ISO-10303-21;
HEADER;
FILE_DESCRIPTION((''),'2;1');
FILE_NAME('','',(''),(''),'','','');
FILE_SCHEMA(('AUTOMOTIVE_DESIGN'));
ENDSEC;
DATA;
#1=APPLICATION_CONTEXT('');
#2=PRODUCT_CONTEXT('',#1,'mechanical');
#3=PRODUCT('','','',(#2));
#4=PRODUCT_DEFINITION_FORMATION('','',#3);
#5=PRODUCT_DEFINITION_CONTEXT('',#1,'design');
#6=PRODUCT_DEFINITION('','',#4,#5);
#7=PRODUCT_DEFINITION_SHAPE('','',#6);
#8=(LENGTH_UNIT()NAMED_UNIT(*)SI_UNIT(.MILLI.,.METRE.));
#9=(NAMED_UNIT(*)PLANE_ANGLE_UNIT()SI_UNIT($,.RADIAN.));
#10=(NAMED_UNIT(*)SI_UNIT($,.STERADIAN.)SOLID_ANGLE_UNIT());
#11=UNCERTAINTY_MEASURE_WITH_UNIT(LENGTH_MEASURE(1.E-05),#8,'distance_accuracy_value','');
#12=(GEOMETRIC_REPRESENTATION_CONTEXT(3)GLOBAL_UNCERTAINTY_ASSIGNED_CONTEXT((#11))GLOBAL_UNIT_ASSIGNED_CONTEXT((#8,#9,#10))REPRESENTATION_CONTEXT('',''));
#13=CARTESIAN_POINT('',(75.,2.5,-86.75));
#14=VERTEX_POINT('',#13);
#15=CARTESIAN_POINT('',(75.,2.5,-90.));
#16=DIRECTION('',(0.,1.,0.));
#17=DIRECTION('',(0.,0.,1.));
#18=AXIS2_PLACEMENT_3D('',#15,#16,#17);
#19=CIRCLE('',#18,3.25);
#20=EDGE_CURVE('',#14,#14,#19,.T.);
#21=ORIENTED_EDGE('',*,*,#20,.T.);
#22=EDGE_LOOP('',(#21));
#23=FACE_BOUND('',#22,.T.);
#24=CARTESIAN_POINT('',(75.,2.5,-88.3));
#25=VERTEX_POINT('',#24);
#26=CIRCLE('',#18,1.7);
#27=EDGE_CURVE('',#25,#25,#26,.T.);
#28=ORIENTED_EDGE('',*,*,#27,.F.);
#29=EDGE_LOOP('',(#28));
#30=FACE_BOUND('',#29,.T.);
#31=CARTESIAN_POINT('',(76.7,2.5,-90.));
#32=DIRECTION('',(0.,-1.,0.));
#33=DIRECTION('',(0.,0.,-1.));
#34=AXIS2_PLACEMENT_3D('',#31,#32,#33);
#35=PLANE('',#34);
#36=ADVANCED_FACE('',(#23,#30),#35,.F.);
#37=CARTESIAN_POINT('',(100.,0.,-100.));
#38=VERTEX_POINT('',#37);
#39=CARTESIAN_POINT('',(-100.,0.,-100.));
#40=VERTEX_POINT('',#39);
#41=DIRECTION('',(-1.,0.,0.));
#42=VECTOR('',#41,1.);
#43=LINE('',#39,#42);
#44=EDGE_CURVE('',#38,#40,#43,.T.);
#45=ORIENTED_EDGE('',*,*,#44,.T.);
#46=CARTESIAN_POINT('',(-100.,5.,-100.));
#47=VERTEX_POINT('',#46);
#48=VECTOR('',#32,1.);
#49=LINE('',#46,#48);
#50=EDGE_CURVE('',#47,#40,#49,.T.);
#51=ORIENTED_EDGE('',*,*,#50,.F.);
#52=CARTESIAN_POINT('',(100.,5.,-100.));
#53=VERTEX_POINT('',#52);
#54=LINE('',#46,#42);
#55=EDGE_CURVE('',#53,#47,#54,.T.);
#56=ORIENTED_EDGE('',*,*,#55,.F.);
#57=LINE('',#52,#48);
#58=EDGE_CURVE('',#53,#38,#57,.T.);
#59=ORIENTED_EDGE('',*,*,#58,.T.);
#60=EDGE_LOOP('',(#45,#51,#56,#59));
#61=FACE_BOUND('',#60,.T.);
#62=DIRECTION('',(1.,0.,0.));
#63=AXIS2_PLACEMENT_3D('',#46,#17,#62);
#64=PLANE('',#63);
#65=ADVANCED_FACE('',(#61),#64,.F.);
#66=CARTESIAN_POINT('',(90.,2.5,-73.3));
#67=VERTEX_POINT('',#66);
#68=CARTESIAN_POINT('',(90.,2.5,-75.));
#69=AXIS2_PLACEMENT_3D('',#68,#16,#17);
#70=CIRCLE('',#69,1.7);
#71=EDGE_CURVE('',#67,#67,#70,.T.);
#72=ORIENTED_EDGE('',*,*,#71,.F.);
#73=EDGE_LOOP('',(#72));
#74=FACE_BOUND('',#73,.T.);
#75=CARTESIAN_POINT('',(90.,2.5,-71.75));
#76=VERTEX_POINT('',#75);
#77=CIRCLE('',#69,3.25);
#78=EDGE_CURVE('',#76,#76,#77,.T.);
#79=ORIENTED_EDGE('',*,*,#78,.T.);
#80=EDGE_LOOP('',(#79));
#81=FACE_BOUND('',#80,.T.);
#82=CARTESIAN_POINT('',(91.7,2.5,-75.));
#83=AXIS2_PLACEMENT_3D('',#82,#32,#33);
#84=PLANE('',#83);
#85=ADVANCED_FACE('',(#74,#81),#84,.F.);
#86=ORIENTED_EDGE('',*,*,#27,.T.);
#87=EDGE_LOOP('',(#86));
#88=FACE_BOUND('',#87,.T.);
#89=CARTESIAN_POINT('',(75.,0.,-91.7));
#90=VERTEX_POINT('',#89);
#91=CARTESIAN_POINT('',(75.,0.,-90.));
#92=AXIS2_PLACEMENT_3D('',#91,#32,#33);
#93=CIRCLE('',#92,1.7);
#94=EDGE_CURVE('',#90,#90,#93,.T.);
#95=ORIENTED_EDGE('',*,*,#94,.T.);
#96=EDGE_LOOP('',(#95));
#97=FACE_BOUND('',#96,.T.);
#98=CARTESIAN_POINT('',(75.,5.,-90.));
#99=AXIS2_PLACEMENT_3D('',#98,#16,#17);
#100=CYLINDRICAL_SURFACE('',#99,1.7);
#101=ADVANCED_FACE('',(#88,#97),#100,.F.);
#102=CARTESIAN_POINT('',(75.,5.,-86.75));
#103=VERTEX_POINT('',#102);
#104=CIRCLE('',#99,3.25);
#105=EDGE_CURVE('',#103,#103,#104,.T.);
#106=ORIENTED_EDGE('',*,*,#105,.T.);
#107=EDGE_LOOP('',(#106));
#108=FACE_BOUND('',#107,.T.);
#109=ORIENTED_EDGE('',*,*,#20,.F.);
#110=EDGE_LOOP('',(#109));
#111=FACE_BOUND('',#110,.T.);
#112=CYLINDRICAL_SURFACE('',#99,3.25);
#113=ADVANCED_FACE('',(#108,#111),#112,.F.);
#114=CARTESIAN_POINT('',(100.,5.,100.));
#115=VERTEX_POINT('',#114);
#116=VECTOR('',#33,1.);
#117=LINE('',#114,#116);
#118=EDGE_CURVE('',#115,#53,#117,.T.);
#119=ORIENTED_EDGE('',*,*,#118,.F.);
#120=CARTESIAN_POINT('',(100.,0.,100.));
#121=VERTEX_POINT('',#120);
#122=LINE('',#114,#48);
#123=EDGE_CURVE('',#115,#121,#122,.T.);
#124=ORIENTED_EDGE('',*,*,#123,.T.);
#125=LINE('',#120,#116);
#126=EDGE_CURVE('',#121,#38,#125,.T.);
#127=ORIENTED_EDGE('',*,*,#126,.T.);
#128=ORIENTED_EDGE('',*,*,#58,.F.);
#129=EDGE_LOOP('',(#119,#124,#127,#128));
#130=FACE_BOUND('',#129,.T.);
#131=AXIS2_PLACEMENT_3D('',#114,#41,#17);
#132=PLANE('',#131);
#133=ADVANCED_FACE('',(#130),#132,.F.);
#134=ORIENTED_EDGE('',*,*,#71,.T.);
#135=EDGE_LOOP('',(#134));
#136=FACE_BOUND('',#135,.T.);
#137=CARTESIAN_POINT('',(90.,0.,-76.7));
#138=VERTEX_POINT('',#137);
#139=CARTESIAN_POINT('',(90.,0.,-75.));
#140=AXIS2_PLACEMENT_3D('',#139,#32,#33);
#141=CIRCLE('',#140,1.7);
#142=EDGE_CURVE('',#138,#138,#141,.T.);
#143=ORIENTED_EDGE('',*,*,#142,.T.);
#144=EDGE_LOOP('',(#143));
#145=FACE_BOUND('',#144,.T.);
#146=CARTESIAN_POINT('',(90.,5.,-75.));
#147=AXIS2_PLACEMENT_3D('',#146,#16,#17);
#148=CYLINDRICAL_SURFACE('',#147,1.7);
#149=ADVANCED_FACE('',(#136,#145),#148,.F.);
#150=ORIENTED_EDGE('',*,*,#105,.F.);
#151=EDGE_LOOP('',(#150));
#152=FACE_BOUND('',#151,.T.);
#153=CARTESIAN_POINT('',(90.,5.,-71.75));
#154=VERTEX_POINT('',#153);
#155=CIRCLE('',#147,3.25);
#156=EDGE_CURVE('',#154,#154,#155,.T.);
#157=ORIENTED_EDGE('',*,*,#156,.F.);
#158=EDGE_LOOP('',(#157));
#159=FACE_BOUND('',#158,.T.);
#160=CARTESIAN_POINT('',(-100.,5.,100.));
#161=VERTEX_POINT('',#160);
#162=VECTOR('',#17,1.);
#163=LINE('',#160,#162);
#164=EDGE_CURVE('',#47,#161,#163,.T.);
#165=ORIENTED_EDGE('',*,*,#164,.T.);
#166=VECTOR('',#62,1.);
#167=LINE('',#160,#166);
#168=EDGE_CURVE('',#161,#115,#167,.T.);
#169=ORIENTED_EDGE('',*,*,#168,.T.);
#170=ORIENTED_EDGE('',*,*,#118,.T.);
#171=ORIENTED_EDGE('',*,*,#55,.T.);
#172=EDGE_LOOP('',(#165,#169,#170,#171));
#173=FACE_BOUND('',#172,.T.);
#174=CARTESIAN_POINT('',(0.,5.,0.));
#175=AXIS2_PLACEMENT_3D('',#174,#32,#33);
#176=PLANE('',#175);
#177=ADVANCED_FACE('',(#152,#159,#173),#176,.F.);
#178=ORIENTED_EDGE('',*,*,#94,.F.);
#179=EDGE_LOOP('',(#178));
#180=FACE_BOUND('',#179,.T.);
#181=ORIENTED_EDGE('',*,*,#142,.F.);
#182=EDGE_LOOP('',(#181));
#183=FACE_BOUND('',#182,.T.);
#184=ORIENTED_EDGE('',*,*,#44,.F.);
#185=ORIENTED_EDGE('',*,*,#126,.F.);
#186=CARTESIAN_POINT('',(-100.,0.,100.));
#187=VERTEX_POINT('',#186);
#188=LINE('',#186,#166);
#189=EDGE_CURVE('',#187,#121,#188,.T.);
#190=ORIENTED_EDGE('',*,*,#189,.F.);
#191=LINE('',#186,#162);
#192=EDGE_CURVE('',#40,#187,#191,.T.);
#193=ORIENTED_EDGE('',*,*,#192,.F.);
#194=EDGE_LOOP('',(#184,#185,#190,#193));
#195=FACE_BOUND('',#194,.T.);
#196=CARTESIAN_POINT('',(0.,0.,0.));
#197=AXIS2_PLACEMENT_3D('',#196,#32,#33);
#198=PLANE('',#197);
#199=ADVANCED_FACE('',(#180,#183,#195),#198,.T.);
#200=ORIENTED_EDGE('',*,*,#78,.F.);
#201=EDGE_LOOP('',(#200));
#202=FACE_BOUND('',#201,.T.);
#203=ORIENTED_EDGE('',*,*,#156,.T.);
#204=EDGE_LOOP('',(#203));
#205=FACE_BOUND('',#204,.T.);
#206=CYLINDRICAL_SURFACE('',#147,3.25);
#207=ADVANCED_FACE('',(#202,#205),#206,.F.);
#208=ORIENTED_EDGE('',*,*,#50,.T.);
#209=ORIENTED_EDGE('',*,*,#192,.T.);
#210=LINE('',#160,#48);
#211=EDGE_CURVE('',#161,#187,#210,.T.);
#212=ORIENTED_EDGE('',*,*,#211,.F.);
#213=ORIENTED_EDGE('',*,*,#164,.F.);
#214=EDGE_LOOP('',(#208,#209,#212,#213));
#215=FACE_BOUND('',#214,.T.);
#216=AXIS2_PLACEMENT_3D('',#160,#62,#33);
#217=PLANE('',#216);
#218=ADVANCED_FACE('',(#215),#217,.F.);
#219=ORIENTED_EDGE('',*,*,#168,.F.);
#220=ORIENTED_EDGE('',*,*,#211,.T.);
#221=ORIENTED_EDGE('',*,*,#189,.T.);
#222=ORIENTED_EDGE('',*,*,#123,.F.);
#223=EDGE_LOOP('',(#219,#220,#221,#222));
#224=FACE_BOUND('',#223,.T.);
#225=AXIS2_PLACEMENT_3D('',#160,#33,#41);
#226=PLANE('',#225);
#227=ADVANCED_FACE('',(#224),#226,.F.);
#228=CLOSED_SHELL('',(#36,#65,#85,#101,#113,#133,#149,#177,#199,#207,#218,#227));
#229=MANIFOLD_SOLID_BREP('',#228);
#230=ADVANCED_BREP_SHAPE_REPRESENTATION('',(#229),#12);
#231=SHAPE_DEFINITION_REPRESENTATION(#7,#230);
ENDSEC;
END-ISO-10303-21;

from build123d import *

# Parameters (mm, degrees)
SKETCH1_W                                     = 200
SKETCH1_H                                     = 200
BASE_PLATE_DEPTH                              = 5
CBORE_START                                   = 2.5
CBORE_FOR_M3_HEX_SOCKET_HEAD_CAP_SCR_2_R      = 3.25
CBORE_FOR_M3_HEX_SOCKET_HEAD_CAP_SCREW1_DEPTH = 2.5
CBORE_FOR_M3_HEX_SOCKET_HEAD_CAP_SCR_3_O_R    = 1.7
CBORE_FOR_M3_HEX_SOCKET_HEAD_CAP_SCR_3_DEPTH  = 2.5


# Read off the part's stored shape, not the designer's step: CBORE for M3 Hex Socket Head Cap Screw1
with BuildPart() as part:
    # Sketch1 → base_plate (new body)
    with BuildSketch(Plane(origin=(0, 0, 0), x_dir=(1, 0, 0), z_dir=(0, 1, 0))):
        Rectangle(SKETCH1_W, SKETCH1_H)
    extrude(amount=BASE_PLATE_DEPTH)

    # CBORE for M3 Hex Socket Head Cap Scr 2 → CBORE for M3 Hex Socket Head Cap Screw1 (cut)
    with BuildSketch(Plane(origin=(0, 0, 0), x_dir=(1, 0, 0), z_dir=(0, 1, 0)).offset(CBORE_START)):
        with Locations((90, 75)):
            Circle(CBORE_FOR_M3_HEX_SOCKET_HEAD_CAP_SCR_2_R)
        with Locations((75, 90)):
            Circle(CBORE_FOR_M3_HEX_SOCKET_HEAD_CAP_SCR_2_R)
    extrude(amount=CBORE_FOR_M3_HEX_SOCKET_HEAD_CAP_SCREW1_DEPTH, mode=Mode.SUBTRACT)

    # CBORE for M3 Hex Socket Head Cap Scr 3 o → CBORE for M3 Hex Socket Head Cap Scr 3 (cut)
    with BuildSketch(Plane(origin=(0, 0, 0), x_dir=(1, 0, 0), z_dir=(0, 1, 0))):
        with Locations((90, 75)):
            Circle(CBORE_FOR_M3_HEX_SOCKET_HEAD_CAP_SCR_3_O_R)
        with Locations((75, 90)):
            Circle(CBORE_FOR_M3_HEX_SOCKET_HEAD_CAP_SCR_3_O_R)
    extrude(amount=CBORE_FOR_M3_HEX_SOCKET_HEAD_CAP_SCR_3_DEPTH, mode=Mode.SUBTRACT)


solid = part.part
